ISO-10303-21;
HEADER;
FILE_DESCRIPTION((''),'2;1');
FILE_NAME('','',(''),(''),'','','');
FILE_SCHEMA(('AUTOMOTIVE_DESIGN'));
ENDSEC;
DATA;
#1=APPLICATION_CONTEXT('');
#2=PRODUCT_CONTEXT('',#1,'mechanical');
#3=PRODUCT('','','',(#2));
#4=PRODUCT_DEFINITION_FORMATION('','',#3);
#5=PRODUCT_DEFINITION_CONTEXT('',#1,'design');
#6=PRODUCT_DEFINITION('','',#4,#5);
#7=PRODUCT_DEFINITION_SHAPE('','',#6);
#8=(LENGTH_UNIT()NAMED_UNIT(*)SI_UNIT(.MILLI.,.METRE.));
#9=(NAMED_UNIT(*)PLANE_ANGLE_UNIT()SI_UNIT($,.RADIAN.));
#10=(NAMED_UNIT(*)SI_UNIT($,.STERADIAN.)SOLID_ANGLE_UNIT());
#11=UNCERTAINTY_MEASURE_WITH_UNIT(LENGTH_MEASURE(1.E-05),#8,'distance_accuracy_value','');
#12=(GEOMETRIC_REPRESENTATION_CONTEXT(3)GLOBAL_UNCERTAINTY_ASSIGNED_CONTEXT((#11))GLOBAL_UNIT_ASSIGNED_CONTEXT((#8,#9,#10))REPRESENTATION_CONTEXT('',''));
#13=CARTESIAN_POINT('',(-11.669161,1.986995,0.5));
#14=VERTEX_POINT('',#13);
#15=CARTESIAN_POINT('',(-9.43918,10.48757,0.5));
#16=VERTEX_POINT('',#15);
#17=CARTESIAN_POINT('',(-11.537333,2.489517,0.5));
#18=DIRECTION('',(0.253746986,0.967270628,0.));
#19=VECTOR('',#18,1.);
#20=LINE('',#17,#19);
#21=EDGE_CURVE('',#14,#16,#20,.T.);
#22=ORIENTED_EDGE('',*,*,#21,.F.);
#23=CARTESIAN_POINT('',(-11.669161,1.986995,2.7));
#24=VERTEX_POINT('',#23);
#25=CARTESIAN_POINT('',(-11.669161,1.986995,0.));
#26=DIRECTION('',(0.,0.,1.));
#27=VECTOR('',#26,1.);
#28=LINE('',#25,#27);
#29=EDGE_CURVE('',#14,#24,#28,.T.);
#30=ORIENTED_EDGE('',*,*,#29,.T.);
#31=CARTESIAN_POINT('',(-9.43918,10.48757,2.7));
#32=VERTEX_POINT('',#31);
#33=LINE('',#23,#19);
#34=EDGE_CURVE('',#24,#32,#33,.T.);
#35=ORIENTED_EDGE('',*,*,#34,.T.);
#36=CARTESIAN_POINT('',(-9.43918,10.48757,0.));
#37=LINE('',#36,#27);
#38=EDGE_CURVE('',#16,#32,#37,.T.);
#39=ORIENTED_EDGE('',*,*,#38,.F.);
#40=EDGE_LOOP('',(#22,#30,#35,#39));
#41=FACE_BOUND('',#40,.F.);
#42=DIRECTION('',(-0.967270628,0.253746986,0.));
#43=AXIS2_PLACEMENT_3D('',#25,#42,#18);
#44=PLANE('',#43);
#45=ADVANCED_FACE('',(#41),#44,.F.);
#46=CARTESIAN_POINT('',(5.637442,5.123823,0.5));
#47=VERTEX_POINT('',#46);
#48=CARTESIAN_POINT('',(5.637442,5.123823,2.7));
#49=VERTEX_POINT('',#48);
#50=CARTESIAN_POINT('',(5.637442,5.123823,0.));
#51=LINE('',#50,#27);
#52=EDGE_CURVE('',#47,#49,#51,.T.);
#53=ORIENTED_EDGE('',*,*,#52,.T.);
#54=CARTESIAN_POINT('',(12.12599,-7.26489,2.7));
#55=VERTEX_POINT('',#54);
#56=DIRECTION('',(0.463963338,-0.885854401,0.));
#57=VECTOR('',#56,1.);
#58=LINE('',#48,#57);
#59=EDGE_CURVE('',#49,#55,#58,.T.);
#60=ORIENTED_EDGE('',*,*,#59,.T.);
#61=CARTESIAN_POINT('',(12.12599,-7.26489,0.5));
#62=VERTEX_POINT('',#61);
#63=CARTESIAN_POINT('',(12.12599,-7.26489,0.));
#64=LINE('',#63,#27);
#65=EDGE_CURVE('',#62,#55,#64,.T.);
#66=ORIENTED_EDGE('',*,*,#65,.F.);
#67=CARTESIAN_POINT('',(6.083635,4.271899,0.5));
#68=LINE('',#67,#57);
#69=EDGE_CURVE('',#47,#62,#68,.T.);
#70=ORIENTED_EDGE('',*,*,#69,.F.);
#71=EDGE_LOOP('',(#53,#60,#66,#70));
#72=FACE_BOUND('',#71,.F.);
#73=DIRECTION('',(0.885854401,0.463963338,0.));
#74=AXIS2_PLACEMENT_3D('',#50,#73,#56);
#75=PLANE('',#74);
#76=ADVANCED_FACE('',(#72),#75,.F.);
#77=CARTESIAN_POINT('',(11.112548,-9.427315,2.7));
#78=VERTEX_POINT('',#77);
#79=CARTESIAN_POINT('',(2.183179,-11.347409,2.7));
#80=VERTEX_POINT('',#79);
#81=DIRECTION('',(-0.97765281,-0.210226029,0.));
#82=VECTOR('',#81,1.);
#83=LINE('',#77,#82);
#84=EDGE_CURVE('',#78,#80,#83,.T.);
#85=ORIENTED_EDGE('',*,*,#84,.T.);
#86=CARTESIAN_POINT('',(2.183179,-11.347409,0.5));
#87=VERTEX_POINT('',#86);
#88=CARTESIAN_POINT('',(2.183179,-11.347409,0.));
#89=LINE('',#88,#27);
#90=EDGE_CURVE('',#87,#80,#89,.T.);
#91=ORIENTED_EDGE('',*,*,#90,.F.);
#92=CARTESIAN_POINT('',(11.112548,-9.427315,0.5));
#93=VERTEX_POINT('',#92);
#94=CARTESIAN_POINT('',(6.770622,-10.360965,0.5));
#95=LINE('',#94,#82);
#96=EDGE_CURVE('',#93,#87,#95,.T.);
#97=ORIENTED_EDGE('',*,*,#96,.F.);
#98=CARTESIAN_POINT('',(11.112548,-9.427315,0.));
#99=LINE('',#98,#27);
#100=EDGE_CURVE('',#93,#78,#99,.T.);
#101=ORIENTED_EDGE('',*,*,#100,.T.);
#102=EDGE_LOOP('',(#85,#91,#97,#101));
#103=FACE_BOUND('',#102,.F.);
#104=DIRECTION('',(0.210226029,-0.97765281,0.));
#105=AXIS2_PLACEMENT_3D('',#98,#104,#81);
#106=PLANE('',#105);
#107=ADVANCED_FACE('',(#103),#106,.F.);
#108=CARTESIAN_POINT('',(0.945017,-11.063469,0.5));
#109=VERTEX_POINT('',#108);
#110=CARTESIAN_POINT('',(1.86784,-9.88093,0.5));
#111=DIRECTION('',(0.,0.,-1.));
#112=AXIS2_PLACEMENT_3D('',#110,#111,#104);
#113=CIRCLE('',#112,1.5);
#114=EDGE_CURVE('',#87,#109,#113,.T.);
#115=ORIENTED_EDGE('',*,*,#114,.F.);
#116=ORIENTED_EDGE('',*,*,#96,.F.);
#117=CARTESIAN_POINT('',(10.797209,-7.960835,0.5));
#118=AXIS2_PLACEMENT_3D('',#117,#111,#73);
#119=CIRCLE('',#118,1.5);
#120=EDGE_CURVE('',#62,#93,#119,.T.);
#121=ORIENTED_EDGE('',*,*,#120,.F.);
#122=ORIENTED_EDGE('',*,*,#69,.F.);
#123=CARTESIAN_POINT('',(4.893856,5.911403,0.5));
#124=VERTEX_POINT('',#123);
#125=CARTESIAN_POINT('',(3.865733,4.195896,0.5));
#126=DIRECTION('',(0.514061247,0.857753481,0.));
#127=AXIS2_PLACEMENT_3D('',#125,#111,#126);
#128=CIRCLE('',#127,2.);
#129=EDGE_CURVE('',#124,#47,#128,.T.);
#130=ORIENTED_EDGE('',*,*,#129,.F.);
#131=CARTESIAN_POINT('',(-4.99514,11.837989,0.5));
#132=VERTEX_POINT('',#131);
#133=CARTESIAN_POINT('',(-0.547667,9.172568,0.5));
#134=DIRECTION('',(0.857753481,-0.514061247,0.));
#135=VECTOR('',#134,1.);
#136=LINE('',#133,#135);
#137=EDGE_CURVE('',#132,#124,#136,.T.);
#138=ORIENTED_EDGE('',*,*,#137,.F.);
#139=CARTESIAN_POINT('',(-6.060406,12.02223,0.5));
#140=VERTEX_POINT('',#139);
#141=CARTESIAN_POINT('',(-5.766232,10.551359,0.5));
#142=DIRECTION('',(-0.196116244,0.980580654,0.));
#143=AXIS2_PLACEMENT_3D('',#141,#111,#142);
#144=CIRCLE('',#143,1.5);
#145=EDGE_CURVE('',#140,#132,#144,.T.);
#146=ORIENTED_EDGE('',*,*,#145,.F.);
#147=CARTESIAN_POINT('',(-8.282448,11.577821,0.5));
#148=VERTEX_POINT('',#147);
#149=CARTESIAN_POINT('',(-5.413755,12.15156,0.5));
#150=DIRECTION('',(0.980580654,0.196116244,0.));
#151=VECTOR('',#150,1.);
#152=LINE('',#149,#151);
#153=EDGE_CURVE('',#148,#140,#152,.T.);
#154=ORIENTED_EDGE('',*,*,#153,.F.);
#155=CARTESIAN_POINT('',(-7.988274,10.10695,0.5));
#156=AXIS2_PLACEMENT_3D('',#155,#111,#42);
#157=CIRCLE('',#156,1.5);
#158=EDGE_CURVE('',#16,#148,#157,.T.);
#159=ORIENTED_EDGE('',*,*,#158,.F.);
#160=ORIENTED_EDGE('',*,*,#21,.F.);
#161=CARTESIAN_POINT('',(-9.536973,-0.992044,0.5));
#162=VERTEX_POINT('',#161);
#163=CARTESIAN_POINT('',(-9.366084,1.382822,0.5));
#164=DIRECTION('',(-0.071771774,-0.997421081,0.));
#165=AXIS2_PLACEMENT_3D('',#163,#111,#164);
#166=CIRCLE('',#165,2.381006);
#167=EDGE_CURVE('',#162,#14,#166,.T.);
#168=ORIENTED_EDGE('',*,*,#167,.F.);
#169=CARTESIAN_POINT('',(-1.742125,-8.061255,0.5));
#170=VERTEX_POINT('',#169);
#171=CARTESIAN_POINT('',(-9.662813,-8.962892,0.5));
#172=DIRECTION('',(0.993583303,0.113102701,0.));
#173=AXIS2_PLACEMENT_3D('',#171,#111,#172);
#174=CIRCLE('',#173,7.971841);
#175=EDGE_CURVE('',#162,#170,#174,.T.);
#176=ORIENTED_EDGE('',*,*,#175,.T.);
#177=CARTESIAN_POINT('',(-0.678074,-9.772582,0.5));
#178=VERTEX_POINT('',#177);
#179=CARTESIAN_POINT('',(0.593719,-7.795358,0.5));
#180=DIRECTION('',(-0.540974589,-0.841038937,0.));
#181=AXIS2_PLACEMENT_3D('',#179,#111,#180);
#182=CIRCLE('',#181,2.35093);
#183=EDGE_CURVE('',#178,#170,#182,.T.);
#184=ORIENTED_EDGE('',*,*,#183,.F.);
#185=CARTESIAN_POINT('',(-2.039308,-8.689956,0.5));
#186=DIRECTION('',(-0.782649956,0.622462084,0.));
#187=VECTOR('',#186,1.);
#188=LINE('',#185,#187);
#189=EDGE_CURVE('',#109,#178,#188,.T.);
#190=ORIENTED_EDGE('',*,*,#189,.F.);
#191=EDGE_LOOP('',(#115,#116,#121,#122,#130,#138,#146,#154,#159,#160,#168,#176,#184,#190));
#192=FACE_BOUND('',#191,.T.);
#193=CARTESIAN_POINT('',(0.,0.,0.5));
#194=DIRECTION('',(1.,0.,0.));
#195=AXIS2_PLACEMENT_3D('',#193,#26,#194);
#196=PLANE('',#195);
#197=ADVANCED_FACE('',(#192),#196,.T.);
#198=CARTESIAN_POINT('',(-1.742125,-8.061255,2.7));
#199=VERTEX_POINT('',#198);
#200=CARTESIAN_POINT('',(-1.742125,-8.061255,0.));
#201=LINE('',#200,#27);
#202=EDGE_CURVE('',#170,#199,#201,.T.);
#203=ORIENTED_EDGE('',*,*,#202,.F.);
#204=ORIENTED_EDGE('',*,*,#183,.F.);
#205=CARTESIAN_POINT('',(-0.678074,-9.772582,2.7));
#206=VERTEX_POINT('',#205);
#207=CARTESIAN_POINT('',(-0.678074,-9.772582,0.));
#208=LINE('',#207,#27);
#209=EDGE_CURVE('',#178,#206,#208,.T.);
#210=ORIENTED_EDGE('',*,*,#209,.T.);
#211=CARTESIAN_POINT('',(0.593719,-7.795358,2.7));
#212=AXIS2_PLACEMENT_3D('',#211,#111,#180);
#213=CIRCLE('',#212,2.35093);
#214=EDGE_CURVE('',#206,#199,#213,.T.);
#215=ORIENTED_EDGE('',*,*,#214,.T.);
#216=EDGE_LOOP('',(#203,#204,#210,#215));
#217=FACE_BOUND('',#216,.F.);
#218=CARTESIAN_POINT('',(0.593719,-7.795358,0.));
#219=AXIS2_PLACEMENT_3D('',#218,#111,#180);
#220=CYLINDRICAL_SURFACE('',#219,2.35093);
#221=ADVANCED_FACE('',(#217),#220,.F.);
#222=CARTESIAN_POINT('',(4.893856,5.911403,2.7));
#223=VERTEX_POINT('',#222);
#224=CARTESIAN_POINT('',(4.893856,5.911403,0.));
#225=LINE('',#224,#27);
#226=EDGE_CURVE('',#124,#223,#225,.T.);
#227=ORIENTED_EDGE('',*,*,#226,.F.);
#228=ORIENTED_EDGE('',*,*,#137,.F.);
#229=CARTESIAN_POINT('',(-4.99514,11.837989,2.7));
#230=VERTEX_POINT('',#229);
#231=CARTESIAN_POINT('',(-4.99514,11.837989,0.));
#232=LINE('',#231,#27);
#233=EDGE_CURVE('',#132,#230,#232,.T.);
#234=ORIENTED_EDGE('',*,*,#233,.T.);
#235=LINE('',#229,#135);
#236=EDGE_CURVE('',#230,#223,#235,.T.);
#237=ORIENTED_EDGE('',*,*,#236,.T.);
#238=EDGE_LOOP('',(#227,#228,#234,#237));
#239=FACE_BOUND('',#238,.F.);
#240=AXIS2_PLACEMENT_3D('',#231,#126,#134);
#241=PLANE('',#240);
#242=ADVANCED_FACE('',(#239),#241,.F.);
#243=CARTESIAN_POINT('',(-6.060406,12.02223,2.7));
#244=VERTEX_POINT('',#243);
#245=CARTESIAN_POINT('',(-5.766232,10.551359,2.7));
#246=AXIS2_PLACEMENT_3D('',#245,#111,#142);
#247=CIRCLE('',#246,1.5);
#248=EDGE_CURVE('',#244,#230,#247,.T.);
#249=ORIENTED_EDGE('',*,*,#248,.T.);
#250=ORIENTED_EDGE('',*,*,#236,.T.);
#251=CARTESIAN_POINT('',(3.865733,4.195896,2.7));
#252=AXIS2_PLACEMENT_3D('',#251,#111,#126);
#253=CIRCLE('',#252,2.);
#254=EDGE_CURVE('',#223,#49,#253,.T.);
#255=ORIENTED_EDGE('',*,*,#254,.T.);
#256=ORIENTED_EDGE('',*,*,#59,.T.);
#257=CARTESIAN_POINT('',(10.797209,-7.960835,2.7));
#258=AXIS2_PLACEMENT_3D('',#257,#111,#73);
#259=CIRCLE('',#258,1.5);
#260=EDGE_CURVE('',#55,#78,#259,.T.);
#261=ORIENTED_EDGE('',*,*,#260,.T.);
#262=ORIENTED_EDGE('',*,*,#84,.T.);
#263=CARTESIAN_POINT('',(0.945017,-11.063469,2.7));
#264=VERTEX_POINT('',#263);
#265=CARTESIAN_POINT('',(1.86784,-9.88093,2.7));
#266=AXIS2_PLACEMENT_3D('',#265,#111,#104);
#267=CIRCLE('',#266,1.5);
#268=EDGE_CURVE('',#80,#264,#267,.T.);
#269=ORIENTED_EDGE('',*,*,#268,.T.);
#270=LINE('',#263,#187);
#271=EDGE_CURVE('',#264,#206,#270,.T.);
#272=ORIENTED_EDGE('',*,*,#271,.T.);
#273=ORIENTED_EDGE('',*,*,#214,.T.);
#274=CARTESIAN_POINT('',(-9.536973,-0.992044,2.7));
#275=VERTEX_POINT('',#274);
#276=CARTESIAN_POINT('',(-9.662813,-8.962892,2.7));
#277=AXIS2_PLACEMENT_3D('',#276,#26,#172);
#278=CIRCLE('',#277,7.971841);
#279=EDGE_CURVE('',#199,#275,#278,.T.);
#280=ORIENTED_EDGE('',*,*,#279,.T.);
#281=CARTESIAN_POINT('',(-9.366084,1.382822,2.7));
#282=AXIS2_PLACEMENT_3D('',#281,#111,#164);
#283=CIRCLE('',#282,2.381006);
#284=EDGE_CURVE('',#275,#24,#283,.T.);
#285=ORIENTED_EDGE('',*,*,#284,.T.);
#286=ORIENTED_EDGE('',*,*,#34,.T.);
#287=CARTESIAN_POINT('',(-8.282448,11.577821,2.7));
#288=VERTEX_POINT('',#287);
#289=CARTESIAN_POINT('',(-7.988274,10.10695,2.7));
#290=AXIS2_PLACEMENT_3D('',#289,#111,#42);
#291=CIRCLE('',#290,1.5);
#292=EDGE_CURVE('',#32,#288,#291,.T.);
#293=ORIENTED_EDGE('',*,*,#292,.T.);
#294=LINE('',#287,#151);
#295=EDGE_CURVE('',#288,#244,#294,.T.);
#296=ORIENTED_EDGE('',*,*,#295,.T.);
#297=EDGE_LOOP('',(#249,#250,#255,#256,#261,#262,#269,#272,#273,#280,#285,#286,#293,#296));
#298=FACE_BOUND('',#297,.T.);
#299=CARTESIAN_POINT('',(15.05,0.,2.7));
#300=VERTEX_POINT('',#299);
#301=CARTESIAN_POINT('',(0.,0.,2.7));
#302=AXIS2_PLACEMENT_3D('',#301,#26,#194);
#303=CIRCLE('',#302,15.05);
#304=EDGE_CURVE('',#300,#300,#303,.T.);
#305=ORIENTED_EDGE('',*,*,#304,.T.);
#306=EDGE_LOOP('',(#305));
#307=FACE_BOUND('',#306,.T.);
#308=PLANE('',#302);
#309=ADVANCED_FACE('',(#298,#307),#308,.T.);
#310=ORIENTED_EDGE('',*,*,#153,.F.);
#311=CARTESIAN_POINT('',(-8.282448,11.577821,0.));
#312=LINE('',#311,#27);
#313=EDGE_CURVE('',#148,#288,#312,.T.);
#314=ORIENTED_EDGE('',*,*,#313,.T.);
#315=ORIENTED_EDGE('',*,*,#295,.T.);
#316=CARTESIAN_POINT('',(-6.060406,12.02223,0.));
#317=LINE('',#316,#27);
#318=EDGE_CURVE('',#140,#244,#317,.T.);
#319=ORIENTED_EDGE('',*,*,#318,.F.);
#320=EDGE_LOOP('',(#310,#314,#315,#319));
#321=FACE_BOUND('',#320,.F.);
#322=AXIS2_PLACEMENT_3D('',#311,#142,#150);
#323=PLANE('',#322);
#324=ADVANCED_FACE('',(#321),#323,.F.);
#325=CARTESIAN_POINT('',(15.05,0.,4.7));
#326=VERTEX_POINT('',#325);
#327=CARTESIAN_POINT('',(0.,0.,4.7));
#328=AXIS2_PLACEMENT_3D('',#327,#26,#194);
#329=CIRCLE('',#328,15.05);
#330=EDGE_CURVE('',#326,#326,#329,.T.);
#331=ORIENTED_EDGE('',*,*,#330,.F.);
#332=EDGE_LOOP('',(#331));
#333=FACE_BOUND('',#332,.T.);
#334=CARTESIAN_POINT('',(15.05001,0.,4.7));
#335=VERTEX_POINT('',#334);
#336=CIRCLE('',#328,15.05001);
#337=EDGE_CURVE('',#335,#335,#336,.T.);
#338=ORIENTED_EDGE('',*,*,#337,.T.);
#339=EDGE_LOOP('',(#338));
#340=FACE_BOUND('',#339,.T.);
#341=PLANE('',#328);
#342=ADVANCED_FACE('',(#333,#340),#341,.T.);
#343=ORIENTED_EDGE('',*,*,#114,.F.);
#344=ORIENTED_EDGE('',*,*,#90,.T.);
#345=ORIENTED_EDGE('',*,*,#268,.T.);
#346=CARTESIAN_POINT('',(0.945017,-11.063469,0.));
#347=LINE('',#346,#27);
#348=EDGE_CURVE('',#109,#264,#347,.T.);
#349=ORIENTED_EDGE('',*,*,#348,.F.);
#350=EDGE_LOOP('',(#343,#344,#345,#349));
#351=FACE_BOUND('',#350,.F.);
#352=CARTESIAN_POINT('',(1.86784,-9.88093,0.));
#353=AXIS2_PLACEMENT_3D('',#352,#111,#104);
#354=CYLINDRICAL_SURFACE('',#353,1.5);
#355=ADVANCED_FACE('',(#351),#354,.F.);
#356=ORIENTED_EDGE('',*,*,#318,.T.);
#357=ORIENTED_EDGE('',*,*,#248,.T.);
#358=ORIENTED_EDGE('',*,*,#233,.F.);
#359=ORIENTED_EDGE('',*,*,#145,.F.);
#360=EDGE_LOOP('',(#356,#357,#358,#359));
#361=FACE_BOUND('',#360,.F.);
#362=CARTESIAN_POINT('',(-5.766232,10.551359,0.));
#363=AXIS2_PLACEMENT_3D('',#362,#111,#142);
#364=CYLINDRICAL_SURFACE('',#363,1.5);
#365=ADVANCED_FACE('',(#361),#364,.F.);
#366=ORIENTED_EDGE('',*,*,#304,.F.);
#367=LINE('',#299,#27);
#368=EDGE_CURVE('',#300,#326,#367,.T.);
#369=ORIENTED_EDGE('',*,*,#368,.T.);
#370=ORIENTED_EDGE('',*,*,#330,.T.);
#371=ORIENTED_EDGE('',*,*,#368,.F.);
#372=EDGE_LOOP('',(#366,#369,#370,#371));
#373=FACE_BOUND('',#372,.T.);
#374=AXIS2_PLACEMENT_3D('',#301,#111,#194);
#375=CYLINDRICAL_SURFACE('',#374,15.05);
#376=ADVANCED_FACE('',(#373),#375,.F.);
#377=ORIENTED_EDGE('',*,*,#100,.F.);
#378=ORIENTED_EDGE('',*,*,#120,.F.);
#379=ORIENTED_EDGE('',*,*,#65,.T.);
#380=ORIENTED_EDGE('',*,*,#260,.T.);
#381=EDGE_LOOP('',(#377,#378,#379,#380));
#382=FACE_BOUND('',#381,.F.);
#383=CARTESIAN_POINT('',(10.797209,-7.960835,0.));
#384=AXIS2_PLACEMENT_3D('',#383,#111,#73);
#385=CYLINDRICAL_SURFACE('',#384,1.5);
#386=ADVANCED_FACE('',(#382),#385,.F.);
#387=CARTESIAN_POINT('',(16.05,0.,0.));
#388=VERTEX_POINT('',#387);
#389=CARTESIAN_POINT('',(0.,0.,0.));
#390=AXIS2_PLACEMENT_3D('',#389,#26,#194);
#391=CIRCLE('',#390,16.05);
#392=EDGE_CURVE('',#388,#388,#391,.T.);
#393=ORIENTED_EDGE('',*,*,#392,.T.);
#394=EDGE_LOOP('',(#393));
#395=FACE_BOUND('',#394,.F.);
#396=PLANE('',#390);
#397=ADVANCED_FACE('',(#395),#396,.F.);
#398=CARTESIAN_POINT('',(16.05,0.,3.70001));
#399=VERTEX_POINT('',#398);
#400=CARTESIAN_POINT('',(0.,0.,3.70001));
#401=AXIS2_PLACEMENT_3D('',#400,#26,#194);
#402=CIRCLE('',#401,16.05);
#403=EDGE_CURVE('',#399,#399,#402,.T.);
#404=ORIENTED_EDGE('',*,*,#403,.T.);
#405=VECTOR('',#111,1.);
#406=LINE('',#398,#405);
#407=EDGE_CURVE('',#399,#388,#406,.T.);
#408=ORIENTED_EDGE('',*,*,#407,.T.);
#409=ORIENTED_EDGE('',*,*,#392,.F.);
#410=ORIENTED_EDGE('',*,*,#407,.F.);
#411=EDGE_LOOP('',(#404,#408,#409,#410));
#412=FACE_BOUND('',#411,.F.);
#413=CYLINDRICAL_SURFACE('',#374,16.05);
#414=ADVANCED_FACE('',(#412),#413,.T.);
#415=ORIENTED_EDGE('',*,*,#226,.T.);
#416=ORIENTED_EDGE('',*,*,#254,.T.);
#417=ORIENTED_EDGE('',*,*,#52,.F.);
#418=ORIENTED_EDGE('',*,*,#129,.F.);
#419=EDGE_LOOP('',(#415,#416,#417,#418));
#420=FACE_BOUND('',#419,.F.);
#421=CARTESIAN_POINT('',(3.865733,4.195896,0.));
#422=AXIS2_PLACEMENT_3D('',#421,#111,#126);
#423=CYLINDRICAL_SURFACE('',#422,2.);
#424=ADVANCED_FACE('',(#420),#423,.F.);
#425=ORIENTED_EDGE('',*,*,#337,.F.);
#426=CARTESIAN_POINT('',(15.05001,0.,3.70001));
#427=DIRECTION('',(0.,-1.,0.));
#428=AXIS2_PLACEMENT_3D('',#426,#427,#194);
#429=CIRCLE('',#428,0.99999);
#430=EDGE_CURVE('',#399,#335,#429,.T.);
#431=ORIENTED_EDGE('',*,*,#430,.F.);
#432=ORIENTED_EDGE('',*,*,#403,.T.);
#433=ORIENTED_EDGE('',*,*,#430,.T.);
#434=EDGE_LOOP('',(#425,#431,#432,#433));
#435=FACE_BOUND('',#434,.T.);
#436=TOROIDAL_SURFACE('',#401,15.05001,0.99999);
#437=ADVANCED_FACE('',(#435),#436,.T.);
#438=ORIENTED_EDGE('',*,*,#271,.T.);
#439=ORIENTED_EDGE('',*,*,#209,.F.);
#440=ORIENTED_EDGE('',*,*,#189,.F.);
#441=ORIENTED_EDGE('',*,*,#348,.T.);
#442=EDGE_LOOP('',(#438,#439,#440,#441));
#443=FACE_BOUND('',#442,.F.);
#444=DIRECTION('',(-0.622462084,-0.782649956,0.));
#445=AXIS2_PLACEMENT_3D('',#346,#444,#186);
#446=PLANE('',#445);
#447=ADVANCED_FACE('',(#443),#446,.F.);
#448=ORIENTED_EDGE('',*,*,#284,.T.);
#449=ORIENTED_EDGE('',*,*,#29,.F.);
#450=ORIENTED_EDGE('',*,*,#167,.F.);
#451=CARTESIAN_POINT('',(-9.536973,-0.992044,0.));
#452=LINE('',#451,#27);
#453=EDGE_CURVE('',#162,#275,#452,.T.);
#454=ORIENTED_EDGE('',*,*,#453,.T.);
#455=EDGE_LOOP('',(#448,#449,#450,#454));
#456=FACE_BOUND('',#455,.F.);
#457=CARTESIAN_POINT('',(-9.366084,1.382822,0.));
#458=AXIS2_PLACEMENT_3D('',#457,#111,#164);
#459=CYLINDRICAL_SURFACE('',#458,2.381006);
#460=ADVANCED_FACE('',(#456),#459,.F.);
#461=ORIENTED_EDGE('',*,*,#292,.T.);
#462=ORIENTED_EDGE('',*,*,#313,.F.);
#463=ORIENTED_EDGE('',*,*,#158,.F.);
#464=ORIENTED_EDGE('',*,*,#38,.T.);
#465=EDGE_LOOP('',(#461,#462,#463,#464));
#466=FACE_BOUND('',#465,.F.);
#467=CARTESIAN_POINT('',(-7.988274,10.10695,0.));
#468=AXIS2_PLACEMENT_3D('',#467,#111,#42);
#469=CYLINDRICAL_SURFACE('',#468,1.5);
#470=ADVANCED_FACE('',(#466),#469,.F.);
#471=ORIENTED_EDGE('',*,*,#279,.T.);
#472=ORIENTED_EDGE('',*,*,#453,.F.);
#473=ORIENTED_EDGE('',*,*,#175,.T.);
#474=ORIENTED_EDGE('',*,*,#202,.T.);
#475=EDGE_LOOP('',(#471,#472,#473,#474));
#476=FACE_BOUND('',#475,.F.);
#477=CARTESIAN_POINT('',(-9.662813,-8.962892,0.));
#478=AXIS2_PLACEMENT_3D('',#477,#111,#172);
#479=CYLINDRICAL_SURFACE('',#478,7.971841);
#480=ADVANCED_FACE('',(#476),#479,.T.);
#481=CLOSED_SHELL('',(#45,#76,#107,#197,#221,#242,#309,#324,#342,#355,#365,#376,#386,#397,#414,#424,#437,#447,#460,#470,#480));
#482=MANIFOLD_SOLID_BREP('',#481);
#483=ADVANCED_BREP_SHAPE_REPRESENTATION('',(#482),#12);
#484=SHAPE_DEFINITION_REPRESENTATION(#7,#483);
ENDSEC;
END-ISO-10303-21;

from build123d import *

# Parameters (mm, degrees)
F0_R     = 16.05
F1_DEPTH = 2.7
F2_R     = 16.05
F2_R_2   = 15.05
F3_DEPTH = 2
F4_R     = 0.99999
F5_R     = 16.05
F6_DEPTH = 0.5


# Not quite as in the source:
# - a fillet or chamfer is up to 0.001 mm smaller than in the source, because OpenCascade refuses the exact size


with BuildPart() as f1:
    # F0 (on Top) → F1 (new body)
    with BuildSketch(Plane.XY):
        Circle(F0_R)
        with BuildLine():
            ThreePointArc((-0.6780739779, -9.7725818409), (-1.4027582732, -9.0367076796), (-1.7421252674, -8.061254886))
            ThreePointArc((-1.7421252674, -8.061254886), (-4.3074337596, -3.0577956653), (-9.536973063, -0.9920438631))
            ThreePointArc((-9.536973063, -0.9920438631), (-11.3022646183, -0.0029612607), (-11.6691612698, 1.9869948988))
            Line((-11.6691612698, 1.9869948988), (-9.4391799782, 10.4875703743))
            ThreePointArc((-9.4391799782, 10.4875703743), (-9.0171024282, 11.1985139757), (-8.2824484024, 11.5778208766))
            Line((-8.2824484024, 11.5778208766), (-6.0604061806, 12.0222295772))
            ThreePointArc((-6.0604061806, 12.0222295772), (-5.5105978167, 12.029415178), (-4.9951399441, 11.8379888177))
            Line((-4.9951399441, 11.8379888177), (4.893855989, 5.9114030387))
            ThreePointArc((4.893855989, 5.9114030387), (5.3199805506, 5.5689093688), (5.6374422976, 5.1238227536))
            Line((5.6374422976, 5.1238227536), (12.1259901628, -7.2648903372))
            ThreePointArc((12.1259901628, -7.2648903372), (12.1554437407, -8.5973863607), (11.1125476049, -9.4273145597))
            Line((11.1125476049, -9.4273145597), (2.1831787086, -11.347409045))
            ThreePointArc((2.1831787086, -11.347409045), (1.5325569034, -11.3429782119), (0.9450171886, -11.0634689113))
            Line((0.9450171886, -11.0634689113), (-0.6780739779, -9.7725818409))
        make_face(mode=Mode.SUBTRACT)
    extrude(amount=F1_DEPTH)

    # F2 (on face) → F3 (join)
    with BuildSketch(Plane.XY.offset(2.7)):
        Circle(F2_R)
        Circle(F2_R_2, mode=Mode.SUBTRACT)
    extrude(amount=F3_DEPTH)

    # F4 (radius 1 in the source; OpenCascade refuses exactly that, so slightly less here)
    f4_edges = [f1.edges().sort_by_distance(p)[0] for p in [
        (-16.05, 0, 4.7),
    ]]
    fillet(f4_edges, radius=F4_R)

    # F5 (on face) → F6 (join)
    with BuildSketch(Plane.XY):
        Circle(F5_R)
    extrude(amount=F6_DEPTH)


solid = f1.part
